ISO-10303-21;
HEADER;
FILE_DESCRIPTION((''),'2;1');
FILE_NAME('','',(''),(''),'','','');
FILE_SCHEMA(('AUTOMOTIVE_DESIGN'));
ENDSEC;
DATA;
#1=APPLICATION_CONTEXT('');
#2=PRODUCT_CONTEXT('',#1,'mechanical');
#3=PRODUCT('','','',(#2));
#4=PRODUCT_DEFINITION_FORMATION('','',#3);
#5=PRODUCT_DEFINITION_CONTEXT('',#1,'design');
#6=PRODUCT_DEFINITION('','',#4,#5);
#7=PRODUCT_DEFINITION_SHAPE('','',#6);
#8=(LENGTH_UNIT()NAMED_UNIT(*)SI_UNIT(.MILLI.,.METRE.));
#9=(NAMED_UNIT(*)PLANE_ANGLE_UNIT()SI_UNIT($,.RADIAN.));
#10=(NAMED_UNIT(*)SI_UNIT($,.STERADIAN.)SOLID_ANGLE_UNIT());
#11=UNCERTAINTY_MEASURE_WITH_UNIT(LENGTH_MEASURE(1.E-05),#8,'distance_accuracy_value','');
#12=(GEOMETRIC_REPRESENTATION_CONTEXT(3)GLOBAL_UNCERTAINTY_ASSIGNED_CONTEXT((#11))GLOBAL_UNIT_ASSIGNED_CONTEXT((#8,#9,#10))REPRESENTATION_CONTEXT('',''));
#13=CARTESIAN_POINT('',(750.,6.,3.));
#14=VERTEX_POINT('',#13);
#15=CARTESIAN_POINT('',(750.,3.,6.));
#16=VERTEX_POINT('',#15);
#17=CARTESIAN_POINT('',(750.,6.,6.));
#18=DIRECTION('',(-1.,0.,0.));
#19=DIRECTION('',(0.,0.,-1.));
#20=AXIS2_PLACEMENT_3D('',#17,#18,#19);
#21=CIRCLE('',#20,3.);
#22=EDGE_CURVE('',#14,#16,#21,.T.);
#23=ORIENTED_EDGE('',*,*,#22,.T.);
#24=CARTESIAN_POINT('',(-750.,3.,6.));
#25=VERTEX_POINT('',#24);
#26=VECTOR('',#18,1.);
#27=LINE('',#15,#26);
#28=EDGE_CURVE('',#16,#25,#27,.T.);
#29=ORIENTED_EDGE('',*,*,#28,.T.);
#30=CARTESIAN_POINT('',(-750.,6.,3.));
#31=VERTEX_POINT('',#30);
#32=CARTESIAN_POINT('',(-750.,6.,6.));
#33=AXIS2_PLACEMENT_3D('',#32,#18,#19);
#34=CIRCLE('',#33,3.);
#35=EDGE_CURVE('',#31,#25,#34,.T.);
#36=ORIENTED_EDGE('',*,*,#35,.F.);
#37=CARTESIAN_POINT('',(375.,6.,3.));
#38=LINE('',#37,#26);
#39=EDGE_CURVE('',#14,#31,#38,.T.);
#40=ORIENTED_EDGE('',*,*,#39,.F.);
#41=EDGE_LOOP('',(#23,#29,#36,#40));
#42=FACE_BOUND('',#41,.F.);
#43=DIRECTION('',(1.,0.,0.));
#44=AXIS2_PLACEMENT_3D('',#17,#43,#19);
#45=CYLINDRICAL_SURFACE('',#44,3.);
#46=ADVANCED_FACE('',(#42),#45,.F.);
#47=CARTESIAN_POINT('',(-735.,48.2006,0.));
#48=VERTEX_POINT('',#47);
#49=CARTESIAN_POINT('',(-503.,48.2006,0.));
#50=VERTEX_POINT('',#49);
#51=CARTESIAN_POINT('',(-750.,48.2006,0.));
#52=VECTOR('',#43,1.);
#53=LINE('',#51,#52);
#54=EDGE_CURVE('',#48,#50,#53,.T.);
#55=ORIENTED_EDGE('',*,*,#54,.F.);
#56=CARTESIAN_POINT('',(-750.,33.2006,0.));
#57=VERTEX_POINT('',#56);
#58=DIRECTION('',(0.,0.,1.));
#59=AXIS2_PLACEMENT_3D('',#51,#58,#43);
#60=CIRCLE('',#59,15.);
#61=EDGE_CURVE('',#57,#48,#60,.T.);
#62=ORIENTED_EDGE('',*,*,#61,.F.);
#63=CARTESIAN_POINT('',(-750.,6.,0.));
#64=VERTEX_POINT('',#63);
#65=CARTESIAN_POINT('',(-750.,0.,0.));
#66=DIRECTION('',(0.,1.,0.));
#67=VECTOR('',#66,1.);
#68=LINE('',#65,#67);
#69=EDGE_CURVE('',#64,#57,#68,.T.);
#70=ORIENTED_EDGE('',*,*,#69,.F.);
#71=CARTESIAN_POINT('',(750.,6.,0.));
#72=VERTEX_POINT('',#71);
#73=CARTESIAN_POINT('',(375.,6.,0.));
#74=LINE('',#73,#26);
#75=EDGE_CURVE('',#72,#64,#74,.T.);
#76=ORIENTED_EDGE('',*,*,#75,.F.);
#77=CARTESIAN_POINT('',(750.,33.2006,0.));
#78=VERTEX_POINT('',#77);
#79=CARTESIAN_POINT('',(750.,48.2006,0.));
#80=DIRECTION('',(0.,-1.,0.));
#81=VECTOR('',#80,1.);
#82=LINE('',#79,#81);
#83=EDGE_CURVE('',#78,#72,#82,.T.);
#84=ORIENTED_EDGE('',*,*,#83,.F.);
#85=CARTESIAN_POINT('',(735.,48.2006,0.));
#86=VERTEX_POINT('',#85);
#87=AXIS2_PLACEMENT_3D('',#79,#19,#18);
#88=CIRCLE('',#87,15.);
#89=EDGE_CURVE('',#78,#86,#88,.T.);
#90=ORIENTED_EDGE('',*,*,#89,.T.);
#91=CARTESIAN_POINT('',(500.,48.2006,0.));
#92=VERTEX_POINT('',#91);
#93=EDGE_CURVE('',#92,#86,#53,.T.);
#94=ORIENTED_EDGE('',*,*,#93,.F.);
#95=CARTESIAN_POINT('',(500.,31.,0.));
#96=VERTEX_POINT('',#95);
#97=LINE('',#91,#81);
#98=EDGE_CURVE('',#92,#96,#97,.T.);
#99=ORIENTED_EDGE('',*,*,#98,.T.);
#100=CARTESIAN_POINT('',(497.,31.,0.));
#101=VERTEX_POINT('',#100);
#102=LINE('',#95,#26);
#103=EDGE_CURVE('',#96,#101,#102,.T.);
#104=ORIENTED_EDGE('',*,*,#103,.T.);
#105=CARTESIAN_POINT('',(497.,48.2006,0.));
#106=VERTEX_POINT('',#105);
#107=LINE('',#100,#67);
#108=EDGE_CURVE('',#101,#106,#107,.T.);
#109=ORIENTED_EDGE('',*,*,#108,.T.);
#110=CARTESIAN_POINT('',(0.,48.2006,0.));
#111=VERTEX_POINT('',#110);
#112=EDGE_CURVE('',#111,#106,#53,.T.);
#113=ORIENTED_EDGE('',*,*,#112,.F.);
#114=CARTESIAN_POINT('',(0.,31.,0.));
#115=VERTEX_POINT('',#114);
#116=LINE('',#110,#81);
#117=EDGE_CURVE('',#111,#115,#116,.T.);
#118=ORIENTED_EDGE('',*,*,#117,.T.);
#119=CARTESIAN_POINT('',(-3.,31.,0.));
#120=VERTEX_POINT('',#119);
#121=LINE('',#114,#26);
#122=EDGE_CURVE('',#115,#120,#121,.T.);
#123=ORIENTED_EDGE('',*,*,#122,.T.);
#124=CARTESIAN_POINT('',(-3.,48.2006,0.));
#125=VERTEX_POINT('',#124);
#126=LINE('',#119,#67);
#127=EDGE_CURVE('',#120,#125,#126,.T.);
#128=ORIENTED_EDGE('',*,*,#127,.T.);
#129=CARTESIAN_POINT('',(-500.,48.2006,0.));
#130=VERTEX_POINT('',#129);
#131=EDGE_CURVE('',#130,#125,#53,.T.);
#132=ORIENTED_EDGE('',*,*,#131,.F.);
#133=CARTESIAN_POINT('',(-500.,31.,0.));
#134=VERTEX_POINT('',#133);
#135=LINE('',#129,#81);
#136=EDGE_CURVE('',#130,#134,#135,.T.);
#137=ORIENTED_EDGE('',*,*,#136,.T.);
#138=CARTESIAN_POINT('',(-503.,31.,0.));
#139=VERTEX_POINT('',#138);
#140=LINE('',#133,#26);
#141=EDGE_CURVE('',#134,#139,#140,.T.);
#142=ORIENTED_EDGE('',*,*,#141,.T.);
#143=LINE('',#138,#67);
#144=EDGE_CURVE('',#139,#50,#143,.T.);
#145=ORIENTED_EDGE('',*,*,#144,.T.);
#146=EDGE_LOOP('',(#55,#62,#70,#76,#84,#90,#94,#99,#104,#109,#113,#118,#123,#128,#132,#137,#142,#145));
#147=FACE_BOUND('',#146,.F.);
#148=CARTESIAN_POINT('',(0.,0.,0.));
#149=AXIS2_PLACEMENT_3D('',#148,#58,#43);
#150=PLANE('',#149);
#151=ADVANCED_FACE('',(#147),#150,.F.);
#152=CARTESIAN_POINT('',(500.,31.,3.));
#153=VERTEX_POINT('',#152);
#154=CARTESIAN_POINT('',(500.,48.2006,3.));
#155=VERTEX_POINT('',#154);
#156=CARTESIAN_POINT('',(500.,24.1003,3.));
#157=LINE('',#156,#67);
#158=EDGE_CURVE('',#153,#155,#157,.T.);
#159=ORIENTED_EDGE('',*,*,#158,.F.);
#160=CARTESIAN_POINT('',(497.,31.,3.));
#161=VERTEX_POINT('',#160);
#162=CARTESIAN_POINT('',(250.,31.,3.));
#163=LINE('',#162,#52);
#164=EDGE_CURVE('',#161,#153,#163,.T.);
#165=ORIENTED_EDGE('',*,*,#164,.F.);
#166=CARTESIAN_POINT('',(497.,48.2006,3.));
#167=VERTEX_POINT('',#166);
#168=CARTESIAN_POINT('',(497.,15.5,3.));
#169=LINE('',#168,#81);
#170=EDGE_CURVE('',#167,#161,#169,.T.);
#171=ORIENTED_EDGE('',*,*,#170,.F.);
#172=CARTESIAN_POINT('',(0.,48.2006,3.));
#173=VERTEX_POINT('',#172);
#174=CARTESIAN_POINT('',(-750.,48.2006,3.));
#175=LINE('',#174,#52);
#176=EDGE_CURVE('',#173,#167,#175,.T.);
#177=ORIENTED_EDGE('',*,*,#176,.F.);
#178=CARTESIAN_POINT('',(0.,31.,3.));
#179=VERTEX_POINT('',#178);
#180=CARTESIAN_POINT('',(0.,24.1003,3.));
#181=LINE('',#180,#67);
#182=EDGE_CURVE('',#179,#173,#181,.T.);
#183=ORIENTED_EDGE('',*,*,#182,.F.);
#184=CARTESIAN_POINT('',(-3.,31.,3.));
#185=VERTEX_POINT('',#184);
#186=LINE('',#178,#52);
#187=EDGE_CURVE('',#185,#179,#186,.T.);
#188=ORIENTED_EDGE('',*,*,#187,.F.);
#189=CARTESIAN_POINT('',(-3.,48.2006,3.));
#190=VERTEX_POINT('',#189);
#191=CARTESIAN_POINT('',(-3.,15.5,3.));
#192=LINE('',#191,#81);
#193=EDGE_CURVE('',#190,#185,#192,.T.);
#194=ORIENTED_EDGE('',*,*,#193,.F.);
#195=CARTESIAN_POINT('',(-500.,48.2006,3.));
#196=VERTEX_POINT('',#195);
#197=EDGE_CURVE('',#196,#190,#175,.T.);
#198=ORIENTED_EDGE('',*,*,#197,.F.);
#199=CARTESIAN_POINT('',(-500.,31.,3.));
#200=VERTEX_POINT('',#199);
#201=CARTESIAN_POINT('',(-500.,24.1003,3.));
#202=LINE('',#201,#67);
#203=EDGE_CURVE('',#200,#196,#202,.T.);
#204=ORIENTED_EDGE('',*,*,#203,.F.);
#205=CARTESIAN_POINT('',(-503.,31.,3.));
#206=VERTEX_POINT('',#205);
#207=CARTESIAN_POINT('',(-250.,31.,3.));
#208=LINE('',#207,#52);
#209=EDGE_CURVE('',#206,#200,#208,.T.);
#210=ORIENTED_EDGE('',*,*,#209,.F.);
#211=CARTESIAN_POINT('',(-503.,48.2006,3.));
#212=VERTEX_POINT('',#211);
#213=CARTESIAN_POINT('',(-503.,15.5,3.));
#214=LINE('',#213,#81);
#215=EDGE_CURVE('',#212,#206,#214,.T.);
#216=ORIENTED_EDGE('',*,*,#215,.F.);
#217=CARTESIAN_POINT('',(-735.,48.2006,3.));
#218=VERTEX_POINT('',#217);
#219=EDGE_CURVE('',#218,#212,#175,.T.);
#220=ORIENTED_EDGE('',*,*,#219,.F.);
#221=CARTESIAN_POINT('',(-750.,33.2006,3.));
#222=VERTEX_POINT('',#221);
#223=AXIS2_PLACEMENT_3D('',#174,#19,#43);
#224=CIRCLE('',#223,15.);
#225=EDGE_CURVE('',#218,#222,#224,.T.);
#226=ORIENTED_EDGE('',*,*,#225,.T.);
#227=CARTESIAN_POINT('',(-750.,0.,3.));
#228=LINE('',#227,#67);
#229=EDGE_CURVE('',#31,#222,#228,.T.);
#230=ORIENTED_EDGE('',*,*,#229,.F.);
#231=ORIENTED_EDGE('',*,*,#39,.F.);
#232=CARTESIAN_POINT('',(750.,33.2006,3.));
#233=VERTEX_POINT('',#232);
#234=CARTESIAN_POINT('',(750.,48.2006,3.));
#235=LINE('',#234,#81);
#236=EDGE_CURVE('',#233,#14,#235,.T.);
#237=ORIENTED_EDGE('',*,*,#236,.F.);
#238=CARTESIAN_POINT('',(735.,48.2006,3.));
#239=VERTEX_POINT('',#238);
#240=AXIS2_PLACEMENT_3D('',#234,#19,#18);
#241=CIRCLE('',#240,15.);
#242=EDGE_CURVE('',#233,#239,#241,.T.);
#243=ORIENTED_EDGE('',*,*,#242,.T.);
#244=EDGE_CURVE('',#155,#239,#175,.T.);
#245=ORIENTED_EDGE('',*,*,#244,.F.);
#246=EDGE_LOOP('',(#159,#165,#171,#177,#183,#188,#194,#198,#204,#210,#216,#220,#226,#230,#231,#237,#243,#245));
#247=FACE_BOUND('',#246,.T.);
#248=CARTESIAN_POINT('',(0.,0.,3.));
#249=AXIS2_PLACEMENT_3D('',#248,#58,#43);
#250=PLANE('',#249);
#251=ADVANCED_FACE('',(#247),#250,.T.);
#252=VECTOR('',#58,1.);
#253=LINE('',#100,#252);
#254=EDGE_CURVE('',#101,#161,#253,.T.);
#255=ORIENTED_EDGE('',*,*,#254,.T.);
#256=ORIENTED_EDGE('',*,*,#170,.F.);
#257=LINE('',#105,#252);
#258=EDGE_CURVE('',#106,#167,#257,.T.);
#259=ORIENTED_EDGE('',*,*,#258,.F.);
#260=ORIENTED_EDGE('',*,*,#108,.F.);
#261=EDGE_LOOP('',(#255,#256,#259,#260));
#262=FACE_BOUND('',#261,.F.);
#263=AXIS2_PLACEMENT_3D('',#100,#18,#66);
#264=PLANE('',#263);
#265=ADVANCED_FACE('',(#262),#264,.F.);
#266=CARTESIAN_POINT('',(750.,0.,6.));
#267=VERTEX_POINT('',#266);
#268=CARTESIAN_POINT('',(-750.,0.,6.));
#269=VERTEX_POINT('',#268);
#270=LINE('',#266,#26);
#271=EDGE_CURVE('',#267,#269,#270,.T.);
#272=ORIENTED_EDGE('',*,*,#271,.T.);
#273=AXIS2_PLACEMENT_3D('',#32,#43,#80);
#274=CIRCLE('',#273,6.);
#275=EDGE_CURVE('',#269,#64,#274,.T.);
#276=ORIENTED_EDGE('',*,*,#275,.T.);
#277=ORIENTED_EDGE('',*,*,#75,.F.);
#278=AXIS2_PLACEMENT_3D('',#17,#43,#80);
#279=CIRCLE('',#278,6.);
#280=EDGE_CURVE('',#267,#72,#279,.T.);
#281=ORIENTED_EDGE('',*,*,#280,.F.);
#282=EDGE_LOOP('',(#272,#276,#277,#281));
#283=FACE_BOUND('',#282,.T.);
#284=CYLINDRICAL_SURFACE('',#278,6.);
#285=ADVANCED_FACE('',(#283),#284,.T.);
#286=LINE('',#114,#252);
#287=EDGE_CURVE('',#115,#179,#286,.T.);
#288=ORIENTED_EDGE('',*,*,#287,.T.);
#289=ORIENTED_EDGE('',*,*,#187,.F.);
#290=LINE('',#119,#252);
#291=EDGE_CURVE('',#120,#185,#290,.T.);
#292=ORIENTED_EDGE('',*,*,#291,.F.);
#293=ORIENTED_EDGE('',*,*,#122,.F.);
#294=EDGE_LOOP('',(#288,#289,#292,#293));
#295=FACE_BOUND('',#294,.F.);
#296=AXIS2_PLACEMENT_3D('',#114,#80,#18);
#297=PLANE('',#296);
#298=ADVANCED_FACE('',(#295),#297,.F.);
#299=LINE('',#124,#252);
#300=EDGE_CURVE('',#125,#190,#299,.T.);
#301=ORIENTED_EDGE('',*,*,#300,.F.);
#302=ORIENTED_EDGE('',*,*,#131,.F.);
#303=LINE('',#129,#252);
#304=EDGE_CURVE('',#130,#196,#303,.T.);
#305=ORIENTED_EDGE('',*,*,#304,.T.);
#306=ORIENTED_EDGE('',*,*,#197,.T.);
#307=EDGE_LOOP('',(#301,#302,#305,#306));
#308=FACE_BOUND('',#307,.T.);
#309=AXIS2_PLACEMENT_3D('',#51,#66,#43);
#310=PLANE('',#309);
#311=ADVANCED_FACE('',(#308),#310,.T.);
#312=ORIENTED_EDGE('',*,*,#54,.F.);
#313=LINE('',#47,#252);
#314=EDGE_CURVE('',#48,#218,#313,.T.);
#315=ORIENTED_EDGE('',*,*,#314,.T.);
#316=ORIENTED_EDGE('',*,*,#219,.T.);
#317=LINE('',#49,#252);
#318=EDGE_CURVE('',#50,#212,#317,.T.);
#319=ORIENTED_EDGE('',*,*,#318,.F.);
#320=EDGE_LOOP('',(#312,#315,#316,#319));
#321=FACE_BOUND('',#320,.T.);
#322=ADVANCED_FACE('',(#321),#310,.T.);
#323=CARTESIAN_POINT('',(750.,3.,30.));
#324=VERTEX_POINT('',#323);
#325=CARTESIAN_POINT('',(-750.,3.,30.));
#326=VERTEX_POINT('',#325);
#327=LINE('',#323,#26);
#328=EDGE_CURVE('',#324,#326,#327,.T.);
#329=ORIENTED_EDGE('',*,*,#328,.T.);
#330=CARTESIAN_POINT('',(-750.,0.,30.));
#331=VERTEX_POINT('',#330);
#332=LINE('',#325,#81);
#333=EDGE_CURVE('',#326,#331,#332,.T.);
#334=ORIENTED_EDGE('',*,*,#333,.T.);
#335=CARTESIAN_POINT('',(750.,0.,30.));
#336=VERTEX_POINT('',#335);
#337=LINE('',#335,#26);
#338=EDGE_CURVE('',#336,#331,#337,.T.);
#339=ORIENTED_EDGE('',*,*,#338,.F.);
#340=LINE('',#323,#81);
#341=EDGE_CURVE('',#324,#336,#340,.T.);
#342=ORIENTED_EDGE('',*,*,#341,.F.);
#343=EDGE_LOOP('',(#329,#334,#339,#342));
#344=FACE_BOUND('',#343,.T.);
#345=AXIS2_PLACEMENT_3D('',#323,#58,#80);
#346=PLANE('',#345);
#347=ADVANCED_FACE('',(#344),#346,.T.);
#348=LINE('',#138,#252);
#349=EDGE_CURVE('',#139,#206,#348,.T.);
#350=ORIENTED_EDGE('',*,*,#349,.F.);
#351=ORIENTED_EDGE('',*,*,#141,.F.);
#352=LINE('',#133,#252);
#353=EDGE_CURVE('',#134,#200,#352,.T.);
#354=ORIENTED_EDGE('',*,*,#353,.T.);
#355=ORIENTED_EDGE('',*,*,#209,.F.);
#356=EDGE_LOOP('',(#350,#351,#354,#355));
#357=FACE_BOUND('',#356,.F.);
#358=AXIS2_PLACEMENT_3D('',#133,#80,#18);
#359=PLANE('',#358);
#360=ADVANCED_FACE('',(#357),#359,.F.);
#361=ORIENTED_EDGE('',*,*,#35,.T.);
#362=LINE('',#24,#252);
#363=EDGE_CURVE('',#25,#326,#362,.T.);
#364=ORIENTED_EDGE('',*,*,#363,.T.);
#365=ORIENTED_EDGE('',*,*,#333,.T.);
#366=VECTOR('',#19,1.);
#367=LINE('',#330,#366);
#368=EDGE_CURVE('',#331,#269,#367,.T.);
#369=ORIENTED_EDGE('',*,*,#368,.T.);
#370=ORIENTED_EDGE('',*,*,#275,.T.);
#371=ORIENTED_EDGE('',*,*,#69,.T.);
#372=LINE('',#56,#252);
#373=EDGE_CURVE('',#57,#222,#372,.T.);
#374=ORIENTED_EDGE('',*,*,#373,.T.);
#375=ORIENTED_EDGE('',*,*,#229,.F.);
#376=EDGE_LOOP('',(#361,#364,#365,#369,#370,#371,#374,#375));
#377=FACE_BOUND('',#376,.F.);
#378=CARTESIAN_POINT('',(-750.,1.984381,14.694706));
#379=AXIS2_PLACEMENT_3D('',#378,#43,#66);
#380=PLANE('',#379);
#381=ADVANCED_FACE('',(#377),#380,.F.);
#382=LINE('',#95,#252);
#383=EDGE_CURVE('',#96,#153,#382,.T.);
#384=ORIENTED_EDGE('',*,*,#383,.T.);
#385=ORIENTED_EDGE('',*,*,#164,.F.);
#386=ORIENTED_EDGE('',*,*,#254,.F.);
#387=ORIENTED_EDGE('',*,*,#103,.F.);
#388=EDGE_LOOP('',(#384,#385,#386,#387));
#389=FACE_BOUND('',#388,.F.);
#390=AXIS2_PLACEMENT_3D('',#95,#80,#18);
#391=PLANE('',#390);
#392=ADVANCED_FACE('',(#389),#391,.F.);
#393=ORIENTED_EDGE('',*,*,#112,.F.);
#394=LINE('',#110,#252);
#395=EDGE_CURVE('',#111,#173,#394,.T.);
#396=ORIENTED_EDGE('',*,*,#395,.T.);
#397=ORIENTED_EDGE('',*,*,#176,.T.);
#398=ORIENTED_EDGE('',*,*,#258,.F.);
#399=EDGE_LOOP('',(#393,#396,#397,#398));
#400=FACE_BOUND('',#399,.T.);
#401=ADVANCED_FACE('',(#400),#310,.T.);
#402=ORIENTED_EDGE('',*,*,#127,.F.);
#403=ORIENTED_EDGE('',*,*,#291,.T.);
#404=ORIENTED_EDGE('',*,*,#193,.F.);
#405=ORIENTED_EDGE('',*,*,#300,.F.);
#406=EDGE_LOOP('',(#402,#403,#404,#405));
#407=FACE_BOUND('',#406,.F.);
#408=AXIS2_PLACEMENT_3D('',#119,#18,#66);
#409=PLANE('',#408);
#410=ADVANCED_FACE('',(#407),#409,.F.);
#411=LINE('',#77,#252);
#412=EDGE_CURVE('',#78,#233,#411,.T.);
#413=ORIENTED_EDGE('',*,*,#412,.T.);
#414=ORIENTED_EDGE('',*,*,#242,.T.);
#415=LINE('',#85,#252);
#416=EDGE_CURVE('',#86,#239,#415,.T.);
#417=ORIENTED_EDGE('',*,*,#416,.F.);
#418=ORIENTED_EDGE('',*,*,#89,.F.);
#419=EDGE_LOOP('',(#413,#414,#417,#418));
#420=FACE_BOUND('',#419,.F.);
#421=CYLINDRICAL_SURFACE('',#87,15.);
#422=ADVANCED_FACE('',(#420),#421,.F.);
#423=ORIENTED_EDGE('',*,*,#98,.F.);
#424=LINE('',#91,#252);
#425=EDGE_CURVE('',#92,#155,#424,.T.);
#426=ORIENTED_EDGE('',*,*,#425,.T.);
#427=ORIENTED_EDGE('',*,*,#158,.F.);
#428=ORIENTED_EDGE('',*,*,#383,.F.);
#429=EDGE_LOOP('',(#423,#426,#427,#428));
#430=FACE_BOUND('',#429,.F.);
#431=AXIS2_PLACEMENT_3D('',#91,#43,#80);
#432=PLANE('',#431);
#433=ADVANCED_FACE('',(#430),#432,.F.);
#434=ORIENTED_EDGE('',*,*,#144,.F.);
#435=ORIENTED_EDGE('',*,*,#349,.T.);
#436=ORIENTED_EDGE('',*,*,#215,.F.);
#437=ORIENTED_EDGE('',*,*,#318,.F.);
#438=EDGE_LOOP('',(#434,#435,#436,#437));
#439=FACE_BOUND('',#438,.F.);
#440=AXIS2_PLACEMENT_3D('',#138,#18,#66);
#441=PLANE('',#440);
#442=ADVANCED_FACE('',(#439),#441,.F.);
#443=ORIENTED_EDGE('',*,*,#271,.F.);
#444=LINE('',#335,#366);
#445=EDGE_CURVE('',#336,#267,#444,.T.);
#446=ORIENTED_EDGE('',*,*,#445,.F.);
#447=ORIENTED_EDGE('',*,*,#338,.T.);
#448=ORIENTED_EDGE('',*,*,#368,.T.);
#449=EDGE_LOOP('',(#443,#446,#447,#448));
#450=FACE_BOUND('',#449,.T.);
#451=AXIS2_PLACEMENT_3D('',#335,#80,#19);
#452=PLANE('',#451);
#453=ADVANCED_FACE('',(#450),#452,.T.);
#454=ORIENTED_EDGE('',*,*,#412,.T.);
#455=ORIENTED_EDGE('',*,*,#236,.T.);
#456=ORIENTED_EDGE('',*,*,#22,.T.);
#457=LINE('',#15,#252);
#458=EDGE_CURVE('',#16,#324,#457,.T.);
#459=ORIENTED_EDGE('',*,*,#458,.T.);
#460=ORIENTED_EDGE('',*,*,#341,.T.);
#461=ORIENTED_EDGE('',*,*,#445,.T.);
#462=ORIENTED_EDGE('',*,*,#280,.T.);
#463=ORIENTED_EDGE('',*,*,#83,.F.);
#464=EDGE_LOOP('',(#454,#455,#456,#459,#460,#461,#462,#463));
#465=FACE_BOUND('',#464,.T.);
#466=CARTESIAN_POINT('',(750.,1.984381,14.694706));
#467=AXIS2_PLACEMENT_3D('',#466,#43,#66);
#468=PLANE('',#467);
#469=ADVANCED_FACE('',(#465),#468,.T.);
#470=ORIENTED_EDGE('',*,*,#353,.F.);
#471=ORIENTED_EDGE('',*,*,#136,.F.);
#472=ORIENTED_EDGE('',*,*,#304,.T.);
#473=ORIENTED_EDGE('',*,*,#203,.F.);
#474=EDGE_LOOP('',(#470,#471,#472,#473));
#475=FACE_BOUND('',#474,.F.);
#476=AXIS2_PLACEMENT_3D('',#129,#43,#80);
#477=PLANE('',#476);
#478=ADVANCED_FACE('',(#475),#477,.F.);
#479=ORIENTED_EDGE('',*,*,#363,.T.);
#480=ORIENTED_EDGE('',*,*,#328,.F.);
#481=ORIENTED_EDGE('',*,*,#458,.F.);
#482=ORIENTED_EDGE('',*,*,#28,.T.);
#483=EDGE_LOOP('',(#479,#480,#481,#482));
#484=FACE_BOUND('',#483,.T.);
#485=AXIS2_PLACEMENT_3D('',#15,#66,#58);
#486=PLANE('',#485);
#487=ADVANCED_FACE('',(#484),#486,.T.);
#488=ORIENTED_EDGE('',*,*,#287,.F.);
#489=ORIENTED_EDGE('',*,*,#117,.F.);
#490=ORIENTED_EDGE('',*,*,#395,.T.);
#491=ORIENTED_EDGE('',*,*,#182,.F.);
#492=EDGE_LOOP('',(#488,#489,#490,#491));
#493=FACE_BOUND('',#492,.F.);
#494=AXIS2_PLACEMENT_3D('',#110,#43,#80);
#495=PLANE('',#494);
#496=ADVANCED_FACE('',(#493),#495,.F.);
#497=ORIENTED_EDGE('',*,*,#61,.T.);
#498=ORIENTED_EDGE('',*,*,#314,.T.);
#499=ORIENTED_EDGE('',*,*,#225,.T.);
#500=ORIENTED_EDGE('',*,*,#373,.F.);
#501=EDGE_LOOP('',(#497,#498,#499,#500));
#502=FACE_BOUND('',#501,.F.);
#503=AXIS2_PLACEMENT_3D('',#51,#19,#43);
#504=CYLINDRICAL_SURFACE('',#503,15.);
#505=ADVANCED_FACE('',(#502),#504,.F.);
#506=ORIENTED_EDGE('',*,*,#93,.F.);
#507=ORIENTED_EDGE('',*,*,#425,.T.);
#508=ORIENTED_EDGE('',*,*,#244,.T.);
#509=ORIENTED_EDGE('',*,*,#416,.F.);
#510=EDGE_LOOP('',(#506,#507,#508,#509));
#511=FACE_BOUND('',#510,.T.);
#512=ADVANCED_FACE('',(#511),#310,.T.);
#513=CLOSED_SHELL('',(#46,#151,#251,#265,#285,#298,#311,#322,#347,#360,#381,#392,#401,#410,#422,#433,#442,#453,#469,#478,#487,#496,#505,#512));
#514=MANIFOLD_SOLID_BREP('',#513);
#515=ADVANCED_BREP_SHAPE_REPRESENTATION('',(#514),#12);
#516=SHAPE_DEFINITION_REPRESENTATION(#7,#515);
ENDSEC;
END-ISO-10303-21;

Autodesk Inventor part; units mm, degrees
ref_plane "YZ Plane" through (0, 0, 0) normal (1, 0, 0) x (0, 1, 0)
ref_plane "XZ Plane" through (0, 0, 0) normal (0, 1, 0) x (-1, 0, 0)
ref_plane "XY Plane" through (0, 0, 0) normal (0, 0, 1) x (1, 0, 0)
sketch "Sketch1" plane through (0, 0, 0) normal (0, 0, 1) x (1, 0, 0)
  line L0 (-750, 48.2006) -> (750, 48.2006)
  line L1 (750, 48.2006) -> (750, 0)
  line L2 (750, 0) -> (-750, 0)
  line L3 (-750, 0) -> (-750, 48.2006)
  point P0 (0, 0)
  point P1 (0, 0)
  dimension "d0" = 1500
  dimension "d1" = 48.2006
extrude "Plate1" add sketch "Sketch1" along normal blind 3
sketch "Sketch2" plane through (750, 3, 0) normal (0, -1, 0) x (1, 0, 0)
  line L0 (-1500, 0) -> (0, 0)
  line L1 (0, 0) -> (0, 30)
  line L2 (0, 30) -> (-1500, 30)
  line L3 (-1500, 30) -> (-1500, 0)
edge flange "Flange1" height 30 angle 90 thickness 3 bend radius 3 thickness toward (0, -1, 0) relief tear relief width 3 relief depth 1.5 edges at (0, 0, 3) wall of the first edge with corners at (-750, 3, 0) (750, 3, 0) (750, 3, 30) (-750, 3, 30)
bend "Bend1"
corner "Corner1"
sketch "Sketch5" plane through (0, 0, 0) normal (0, 0, -1) x (-1, 0, 0)
  line L0 (750, 48.2006) -> (-750, 48.2006) projected
  line L1 (500, 48.2006) -> (500, 31)
  line L2 (500, 31) -> (503, 31)
  line L3 (503, 31) -> (503, 48.2006)
  line L4 (750, 0) -> (-750, 0) projected
  point P0 (0, 0)
  dimension "d18" = 3
  dimension "d19" = 247
  dimension "d20" = 31
extrude "Extrusion1" cut sketch "Sketch5" against normal through all
pattern_linear "Rectangular Pattern1" count 3 spacing 500 along (1, 0, 0) of "Extrusion1"
sketch "Sketch6" plane through (0, 0, 0) normal (0, 0, -1) x (-1, 0, 0)
  line L0 (-750, 48.2006) -> (-750, 6) projected
  circle A0 centre (-750, 48.2006) radius 15
  line L1 (-750, 48.2006) -> (-500, 48.2006) projected
  point P0 (0, 0)
  point P1 (-735, 48.2006)
  point P2 (-750, 33.2006)
  dimension "d24" = 30
extrude "Extrusion2" cut sketch "Sketch6" against normal through all contours L1 A0 L0 picked at (-740.1254, 47.088)
mirror "Mirror1" about plane through (0, 0, 0) normal (1, 0, 0) of "Extrusion2"
equation "\"d1\" = Стрингер_4"
equation "\"d18\" = Thickness"
equation "\"d2\" = Thickness"
equation "\"d3\" = BendReliefWidth"
equation "\"d4\" = BendReliefDepth"
equation "\"d5\" = MinimumRemnant"
equation "\"d6\" = TransitionRadius"
equation "\"d9\" = BendRadius"
equation "\"d10\" = CornerReliefSize"
equation "\"d11\" = GapSize"
equation "\"d12\" = JacobiRadiusSize"
equation "\"BendRadius\" = Thickness"
equation "\"BendReliefWidth\" = Thickness"
equation "\"BendReliefDepth\" = 0.5 * Thickness"
equation "\"CornerReliefSize\" = 4 * Thickness"
equation "\"MinimumRemnant\" = 2 * Thickness"
equation "\"TransitionRadius\" = BendRadius"
equation "\"JacobiRadiusSize\" = BendRadius"
equation "\"GapSize\" = Thickness"
equation "\"Стрингер_4\" = 48.200578"
equation "\"Thickness\" = 3"
properties part number "МОО 054 стрингер борт 41"
